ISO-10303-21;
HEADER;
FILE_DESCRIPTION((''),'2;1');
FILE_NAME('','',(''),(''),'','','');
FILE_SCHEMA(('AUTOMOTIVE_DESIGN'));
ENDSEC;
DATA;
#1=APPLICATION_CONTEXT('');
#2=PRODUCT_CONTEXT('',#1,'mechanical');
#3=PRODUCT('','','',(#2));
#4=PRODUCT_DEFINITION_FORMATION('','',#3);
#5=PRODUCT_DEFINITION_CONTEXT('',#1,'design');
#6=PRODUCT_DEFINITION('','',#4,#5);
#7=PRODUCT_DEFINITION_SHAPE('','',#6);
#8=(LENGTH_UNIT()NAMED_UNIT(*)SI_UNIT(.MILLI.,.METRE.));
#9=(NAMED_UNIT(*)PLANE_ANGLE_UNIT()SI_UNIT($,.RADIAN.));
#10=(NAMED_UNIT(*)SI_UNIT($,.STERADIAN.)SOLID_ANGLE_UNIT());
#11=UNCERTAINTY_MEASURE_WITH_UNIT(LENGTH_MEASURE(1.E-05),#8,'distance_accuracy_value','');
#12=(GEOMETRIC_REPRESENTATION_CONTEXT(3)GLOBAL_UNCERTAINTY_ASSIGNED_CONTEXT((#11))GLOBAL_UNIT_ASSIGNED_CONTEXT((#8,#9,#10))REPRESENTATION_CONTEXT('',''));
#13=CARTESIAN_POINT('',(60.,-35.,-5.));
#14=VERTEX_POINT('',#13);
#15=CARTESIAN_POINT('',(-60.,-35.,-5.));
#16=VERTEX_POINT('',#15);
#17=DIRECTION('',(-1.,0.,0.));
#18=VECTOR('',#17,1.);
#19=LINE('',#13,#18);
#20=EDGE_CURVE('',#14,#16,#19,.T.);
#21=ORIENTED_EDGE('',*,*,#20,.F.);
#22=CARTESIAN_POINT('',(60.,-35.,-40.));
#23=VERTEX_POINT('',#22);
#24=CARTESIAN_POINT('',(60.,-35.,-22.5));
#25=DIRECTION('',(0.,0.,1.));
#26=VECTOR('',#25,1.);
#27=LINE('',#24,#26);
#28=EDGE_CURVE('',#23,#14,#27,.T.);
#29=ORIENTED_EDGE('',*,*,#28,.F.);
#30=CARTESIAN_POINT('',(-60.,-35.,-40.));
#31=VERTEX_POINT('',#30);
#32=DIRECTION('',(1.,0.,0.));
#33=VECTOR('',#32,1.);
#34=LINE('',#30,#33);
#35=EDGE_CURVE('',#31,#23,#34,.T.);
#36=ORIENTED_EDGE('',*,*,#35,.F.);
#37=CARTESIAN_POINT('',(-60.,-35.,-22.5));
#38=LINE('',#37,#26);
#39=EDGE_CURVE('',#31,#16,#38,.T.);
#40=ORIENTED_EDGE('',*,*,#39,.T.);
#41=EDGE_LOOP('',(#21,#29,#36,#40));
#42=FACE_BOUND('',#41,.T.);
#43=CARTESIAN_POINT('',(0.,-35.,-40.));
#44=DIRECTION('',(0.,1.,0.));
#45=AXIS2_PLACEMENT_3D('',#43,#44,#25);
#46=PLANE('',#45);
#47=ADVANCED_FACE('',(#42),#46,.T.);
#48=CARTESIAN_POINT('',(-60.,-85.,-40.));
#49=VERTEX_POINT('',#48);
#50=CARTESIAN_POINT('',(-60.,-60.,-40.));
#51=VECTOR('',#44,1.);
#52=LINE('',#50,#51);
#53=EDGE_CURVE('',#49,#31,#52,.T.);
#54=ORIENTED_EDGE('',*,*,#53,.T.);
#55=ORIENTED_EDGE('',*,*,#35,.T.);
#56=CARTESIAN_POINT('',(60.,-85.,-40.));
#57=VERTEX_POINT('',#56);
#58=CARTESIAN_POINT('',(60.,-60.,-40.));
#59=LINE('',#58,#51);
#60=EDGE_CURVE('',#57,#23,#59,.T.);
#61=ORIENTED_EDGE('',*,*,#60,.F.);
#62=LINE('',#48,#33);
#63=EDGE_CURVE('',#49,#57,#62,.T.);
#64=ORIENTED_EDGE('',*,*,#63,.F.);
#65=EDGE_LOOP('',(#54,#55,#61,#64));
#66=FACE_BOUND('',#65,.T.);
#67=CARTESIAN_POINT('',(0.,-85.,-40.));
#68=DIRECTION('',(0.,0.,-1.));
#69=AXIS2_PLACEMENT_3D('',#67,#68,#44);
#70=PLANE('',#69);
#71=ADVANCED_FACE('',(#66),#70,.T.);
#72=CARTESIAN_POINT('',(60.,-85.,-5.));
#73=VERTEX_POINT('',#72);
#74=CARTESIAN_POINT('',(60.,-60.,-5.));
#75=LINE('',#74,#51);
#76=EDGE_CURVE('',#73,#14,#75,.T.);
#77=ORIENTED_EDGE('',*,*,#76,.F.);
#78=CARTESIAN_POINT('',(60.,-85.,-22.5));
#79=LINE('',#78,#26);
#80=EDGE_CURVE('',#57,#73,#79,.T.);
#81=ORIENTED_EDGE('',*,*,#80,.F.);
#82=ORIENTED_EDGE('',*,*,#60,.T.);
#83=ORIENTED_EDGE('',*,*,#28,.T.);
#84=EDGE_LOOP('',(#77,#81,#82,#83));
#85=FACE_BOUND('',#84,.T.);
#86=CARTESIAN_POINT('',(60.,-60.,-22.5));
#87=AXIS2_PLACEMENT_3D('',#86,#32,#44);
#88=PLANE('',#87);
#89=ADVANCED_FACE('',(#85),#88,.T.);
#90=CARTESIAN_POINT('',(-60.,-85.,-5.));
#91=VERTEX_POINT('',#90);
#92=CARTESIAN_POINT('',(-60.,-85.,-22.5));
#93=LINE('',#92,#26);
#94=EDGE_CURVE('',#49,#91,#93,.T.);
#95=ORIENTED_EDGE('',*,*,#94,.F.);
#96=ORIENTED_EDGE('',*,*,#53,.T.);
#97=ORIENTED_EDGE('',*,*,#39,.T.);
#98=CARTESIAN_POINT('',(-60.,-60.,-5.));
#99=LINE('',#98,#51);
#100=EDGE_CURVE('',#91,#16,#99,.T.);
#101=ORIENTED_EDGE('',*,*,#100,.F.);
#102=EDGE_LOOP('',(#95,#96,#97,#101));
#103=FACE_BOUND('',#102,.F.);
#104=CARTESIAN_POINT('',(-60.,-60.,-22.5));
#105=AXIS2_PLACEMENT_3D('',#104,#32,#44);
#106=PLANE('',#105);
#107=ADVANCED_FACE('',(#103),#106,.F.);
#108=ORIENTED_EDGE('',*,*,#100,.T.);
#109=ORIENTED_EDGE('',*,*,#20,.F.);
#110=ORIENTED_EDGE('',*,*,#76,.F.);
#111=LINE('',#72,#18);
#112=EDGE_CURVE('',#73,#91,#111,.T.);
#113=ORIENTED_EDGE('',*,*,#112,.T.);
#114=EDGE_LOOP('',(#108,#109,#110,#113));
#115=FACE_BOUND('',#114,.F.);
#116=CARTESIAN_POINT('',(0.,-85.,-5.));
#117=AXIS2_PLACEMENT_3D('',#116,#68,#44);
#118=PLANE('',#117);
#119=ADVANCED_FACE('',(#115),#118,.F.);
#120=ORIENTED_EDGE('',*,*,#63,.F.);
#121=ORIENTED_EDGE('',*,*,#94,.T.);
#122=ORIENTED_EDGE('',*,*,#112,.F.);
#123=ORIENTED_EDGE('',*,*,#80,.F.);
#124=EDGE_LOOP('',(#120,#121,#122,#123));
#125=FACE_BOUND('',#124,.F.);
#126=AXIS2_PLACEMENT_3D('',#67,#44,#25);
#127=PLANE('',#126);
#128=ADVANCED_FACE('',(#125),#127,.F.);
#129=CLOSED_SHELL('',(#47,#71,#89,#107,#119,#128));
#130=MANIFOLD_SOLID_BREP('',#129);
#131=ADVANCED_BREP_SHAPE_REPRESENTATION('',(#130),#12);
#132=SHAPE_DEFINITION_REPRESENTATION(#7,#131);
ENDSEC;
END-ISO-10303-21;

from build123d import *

# Parameters (mm, degrees)
F0_W     = 50
F0_H     = 35
F1_DEPTH = 60


# Not quite as in the source:
# - a feature of the source that left no trace in its solid (it failed there, or was rolled back) is left out


with BuildPart() as f1:
    # F0 (on Right) → F1 (new body, symmetric)
    with BuildSketch(Plane.YZ):
        with Locations((-60, -22.5)):
            Rectangle(F0_W, F0_H)
    extrude(amount=F1_DEPTH, both=True)


solid = f1.part
